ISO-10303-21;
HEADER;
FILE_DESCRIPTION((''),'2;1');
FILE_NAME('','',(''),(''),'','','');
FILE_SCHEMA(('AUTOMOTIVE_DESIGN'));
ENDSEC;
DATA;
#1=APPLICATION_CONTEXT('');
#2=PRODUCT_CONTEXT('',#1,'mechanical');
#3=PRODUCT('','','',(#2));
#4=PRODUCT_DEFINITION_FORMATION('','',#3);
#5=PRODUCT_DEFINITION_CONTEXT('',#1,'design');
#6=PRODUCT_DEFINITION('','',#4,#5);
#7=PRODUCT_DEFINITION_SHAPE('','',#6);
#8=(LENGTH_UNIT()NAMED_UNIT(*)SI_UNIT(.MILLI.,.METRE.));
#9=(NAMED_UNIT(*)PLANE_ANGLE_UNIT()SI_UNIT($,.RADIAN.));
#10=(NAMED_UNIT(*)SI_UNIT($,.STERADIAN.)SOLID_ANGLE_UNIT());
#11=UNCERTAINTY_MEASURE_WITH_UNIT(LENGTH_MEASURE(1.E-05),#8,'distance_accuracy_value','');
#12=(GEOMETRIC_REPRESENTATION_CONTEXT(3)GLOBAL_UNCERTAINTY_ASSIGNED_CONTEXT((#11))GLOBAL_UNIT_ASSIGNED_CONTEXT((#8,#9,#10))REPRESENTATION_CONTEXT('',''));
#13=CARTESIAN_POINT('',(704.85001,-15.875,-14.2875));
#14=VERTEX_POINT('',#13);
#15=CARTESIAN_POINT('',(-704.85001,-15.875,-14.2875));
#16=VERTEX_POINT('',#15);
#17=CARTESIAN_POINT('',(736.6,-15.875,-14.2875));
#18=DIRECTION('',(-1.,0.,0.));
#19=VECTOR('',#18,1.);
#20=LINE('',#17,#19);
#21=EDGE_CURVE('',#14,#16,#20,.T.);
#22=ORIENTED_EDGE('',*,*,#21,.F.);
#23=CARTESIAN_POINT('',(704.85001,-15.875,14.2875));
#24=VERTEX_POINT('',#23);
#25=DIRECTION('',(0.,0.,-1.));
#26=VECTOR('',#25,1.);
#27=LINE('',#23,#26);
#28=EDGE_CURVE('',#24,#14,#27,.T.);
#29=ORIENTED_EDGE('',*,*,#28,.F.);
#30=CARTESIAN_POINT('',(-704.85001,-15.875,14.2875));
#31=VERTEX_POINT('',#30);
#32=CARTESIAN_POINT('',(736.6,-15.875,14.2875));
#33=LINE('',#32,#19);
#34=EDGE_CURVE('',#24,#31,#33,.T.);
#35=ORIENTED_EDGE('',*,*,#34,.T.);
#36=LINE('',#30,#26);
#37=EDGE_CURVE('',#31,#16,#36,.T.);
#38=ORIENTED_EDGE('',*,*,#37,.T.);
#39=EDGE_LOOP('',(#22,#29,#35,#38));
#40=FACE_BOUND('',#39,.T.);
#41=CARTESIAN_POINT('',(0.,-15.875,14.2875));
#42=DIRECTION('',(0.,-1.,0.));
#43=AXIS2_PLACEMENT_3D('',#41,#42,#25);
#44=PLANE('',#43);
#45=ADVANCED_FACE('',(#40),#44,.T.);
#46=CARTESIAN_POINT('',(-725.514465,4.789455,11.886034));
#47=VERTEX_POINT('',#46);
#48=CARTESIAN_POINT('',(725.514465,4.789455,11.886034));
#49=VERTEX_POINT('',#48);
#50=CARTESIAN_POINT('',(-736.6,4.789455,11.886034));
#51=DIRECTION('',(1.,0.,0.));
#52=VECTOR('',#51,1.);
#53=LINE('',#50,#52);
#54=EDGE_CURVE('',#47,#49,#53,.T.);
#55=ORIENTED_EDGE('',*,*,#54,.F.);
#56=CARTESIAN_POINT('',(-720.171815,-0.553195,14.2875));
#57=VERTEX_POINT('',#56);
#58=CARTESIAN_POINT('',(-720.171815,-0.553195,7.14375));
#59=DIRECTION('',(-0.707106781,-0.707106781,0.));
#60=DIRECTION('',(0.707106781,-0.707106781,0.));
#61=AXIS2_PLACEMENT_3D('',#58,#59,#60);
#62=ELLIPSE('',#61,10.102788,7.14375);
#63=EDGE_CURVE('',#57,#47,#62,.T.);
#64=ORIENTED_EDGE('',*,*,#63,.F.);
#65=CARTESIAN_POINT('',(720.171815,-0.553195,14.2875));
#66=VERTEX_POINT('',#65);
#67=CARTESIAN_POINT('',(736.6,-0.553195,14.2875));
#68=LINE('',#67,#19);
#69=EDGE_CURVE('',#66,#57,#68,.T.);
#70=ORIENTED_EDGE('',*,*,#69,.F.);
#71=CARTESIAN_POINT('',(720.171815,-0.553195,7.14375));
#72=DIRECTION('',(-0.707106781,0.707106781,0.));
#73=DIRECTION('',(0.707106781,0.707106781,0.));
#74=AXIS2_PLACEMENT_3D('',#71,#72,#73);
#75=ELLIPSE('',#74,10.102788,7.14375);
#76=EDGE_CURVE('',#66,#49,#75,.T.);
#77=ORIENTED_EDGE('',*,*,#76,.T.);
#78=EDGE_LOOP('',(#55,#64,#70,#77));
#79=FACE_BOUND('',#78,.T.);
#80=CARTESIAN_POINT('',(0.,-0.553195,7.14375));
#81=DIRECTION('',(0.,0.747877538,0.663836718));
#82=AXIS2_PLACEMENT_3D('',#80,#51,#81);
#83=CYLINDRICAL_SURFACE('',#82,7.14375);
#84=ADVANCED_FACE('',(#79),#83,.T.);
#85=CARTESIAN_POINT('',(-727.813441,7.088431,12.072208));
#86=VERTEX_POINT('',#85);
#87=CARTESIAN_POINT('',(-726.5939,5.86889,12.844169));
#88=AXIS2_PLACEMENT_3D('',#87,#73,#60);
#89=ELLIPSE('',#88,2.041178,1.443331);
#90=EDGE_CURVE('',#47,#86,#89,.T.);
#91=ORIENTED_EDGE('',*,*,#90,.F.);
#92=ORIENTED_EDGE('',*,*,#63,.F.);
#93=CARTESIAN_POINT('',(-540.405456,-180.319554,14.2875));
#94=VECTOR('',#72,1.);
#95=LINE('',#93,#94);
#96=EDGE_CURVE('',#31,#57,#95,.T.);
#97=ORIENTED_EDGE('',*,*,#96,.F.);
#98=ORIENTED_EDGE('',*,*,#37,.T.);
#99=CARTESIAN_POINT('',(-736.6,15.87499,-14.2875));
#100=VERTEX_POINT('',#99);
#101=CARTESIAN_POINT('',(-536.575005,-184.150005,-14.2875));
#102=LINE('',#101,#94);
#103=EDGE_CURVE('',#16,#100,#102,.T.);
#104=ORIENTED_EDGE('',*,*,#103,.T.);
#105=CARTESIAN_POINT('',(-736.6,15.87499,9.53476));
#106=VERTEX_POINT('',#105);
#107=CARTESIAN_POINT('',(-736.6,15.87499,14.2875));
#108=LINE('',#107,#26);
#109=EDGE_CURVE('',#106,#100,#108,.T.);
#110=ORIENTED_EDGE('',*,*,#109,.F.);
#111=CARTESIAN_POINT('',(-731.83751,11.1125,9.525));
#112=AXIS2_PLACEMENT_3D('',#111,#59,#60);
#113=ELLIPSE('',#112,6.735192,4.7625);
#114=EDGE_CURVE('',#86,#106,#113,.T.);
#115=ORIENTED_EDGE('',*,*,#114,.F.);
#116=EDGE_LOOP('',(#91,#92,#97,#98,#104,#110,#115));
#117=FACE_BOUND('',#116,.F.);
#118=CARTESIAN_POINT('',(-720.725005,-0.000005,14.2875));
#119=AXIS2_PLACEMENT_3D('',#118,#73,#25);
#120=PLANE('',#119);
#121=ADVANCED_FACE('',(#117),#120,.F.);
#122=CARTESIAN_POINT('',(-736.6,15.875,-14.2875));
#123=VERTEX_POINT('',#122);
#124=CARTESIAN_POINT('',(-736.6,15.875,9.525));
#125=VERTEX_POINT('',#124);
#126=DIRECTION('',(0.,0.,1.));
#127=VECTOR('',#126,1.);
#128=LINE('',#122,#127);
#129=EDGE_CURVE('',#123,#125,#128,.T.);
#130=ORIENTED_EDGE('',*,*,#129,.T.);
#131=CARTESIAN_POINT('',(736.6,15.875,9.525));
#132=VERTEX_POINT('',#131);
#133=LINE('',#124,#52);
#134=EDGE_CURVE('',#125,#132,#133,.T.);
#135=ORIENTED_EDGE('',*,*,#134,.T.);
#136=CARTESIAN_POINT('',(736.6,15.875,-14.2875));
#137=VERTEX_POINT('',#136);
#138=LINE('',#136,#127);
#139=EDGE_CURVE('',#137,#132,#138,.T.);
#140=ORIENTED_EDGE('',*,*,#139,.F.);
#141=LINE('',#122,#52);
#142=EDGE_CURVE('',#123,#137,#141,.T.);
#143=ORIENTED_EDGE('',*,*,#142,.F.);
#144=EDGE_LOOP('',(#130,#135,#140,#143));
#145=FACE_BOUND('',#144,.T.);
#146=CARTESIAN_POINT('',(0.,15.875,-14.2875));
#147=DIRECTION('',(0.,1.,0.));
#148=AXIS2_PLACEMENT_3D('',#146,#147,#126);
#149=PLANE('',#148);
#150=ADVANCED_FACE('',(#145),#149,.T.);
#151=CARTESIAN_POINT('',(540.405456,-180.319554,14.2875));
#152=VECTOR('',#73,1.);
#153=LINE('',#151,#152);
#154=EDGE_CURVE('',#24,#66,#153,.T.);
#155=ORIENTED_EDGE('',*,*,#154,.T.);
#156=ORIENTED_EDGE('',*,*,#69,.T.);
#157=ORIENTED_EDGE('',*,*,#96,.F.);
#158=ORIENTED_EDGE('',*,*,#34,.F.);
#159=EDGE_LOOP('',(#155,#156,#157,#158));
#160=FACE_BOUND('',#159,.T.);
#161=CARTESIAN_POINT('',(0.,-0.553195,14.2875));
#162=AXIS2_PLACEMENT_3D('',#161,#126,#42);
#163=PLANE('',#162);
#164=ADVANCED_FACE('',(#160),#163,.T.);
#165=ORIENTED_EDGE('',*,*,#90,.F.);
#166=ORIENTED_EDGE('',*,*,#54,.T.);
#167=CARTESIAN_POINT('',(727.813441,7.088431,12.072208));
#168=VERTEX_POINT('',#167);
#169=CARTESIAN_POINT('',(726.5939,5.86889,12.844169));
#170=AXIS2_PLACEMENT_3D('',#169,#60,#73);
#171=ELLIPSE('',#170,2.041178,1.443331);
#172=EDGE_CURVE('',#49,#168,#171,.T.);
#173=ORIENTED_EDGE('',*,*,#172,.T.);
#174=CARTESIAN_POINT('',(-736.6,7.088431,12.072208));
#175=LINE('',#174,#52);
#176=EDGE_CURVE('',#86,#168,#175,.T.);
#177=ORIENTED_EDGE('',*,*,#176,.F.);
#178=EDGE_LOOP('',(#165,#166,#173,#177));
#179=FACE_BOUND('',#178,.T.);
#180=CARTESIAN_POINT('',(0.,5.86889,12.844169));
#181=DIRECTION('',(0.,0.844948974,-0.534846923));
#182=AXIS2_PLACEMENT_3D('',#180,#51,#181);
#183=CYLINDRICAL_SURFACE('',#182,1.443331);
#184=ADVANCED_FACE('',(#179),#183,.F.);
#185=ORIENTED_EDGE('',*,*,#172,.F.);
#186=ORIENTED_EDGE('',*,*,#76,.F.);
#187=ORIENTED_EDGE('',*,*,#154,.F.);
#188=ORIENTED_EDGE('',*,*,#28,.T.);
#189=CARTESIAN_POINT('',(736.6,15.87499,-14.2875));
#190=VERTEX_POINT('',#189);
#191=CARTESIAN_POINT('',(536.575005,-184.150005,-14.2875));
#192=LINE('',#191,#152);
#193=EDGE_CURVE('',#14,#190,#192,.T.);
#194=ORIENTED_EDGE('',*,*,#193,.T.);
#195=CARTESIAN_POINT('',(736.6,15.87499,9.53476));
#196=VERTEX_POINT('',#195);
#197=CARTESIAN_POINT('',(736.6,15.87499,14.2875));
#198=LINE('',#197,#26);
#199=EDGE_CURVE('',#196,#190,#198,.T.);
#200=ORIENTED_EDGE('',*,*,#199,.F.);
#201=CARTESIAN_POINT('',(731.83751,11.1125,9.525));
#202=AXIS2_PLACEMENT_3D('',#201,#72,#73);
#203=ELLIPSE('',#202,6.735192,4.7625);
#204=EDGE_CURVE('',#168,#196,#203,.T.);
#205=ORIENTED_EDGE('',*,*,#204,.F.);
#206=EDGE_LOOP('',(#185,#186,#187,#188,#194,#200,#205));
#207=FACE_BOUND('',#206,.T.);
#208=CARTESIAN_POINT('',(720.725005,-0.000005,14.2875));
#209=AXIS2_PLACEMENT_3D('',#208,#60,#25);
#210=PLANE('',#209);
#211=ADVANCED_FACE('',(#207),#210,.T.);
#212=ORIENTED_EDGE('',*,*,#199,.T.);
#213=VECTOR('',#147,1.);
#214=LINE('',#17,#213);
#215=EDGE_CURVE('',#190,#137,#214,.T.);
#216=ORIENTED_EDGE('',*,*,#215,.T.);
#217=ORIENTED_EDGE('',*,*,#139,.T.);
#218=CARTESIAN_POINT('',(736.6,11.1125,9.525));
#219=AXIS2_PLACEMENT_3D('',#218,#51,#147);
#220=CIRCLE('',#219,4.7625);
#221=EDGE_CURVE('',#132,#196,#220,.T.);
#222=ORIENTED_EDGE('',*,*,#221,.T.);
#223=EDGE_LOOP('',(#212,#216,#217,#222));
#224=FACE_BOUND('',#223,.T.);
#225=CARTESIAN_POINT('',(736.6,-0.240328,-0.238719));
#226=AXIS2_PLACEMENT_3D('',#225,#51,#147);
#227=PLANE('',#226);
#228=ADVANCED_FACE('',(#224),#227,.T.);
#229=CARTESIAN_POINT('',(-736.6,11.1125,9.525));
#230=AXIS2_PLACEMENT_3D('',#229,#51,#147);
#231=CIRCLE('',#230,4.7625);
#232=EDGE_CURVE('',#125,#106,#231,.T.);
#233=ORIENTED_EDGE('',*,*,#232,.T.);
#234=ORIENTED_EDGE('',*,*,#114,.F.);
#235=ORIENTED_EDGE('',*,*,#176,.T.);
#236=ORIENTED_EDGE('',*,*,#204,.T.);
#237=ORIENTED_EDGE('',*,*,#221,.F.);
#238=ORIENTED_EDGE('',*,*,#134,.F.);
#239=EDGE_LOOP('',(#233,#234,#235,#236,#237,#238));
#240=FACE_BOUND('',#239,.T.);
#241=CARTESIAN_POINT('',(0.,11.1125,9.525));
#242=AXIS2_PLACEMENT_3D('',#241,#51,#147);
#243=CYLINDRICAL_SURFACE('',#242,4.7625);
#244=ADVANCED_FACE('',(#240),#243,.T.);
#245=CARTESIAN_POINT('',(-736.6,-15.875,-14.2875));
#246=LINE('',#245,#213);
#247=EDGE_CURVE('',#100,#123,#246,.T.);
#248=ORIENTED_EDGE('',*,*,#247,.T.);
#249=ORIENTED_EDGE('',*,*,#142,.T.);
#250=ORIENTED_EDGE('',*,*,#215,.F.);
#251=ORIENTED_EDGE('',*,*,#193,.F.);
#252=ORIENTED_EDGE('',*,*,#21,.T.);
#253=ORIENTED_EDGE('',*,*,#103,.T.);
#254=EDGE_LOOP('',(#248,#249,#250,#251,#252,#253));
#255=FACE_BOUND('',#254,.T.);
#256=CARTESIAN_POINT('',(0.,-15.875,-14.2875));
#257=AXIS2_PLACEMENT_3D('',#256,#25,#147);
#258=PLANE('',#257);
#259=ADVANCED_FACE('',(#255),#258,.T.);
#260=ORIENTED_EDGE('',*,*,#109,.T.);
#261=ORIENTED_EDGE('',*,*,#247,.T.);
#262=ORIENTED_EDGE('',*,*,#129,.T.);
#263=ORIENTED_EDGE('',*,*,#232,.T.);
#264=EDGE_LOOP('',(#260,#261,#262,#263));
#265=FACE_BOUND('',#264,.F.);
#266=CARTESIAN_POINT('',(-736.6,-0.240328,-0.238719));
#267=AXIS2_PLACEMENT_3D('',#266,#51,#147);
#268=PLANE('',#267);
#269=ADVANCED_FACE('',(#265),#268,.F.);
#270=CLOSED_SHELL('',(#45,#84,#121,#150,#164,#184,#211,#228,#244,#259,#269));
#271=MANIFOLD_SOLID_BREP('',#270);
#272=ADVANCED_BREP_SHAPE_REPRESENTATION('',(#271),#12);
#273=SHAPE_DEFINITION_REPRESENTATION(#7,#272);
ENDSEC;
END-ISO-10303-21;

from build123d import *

# Parameters (mm, degrees)
F1_DEPTH = 736.6
F2_SIZE  = 31.74999


# Not quite as in the source:
# - a fillet or chamfer is up to 0.001 mm smaller than in the source, because OpenCascade refuses the exact size


with BuildPart() as f1:
    # F0 (on Right) → F1 (new body, symmetric)
    with BuildSketch(Plane.YZ):
        with BuildLine():
            Line((-15.875, -14.2875), (15.875, -14.2875))
            Line((15.875, -14.2875), (15.875, 9.525))
            ThreePointArc((15.875, 9.525), (12.4385421004, 14.0991686237), (7.08843051, 12.07220847))
            ThreePointArc((7.08843051, 12.07220847), (5.9853917743, 11.4055483551), (4.789455264, 11.886033552))
            ThreePointArc((4.789455264, 11.886033552), (2.3755826554, 13.6595328458), (-0.5531949, 14.2875))
            Line((-0.5531949, 14.2875), (-15.875, 14.2875))
            Line((-15.875, 14.2875), (-15.875, -14.2875))
        make_face()
    extrude(amount=F1_DEPTH, both=True)

    # F2 (size 31.75 in the source; OpenCascade refuses exactly that, so slightly less here)
    f2_edges = [f1.edges().sort_by_distance(p)[0] for p in [
        (-736.6, -15.875, 0),
        (736.6, -15.875, 0),
    ]]
    chamfer(f2_edges, length=F2_SIZE)


solid = f1.part
